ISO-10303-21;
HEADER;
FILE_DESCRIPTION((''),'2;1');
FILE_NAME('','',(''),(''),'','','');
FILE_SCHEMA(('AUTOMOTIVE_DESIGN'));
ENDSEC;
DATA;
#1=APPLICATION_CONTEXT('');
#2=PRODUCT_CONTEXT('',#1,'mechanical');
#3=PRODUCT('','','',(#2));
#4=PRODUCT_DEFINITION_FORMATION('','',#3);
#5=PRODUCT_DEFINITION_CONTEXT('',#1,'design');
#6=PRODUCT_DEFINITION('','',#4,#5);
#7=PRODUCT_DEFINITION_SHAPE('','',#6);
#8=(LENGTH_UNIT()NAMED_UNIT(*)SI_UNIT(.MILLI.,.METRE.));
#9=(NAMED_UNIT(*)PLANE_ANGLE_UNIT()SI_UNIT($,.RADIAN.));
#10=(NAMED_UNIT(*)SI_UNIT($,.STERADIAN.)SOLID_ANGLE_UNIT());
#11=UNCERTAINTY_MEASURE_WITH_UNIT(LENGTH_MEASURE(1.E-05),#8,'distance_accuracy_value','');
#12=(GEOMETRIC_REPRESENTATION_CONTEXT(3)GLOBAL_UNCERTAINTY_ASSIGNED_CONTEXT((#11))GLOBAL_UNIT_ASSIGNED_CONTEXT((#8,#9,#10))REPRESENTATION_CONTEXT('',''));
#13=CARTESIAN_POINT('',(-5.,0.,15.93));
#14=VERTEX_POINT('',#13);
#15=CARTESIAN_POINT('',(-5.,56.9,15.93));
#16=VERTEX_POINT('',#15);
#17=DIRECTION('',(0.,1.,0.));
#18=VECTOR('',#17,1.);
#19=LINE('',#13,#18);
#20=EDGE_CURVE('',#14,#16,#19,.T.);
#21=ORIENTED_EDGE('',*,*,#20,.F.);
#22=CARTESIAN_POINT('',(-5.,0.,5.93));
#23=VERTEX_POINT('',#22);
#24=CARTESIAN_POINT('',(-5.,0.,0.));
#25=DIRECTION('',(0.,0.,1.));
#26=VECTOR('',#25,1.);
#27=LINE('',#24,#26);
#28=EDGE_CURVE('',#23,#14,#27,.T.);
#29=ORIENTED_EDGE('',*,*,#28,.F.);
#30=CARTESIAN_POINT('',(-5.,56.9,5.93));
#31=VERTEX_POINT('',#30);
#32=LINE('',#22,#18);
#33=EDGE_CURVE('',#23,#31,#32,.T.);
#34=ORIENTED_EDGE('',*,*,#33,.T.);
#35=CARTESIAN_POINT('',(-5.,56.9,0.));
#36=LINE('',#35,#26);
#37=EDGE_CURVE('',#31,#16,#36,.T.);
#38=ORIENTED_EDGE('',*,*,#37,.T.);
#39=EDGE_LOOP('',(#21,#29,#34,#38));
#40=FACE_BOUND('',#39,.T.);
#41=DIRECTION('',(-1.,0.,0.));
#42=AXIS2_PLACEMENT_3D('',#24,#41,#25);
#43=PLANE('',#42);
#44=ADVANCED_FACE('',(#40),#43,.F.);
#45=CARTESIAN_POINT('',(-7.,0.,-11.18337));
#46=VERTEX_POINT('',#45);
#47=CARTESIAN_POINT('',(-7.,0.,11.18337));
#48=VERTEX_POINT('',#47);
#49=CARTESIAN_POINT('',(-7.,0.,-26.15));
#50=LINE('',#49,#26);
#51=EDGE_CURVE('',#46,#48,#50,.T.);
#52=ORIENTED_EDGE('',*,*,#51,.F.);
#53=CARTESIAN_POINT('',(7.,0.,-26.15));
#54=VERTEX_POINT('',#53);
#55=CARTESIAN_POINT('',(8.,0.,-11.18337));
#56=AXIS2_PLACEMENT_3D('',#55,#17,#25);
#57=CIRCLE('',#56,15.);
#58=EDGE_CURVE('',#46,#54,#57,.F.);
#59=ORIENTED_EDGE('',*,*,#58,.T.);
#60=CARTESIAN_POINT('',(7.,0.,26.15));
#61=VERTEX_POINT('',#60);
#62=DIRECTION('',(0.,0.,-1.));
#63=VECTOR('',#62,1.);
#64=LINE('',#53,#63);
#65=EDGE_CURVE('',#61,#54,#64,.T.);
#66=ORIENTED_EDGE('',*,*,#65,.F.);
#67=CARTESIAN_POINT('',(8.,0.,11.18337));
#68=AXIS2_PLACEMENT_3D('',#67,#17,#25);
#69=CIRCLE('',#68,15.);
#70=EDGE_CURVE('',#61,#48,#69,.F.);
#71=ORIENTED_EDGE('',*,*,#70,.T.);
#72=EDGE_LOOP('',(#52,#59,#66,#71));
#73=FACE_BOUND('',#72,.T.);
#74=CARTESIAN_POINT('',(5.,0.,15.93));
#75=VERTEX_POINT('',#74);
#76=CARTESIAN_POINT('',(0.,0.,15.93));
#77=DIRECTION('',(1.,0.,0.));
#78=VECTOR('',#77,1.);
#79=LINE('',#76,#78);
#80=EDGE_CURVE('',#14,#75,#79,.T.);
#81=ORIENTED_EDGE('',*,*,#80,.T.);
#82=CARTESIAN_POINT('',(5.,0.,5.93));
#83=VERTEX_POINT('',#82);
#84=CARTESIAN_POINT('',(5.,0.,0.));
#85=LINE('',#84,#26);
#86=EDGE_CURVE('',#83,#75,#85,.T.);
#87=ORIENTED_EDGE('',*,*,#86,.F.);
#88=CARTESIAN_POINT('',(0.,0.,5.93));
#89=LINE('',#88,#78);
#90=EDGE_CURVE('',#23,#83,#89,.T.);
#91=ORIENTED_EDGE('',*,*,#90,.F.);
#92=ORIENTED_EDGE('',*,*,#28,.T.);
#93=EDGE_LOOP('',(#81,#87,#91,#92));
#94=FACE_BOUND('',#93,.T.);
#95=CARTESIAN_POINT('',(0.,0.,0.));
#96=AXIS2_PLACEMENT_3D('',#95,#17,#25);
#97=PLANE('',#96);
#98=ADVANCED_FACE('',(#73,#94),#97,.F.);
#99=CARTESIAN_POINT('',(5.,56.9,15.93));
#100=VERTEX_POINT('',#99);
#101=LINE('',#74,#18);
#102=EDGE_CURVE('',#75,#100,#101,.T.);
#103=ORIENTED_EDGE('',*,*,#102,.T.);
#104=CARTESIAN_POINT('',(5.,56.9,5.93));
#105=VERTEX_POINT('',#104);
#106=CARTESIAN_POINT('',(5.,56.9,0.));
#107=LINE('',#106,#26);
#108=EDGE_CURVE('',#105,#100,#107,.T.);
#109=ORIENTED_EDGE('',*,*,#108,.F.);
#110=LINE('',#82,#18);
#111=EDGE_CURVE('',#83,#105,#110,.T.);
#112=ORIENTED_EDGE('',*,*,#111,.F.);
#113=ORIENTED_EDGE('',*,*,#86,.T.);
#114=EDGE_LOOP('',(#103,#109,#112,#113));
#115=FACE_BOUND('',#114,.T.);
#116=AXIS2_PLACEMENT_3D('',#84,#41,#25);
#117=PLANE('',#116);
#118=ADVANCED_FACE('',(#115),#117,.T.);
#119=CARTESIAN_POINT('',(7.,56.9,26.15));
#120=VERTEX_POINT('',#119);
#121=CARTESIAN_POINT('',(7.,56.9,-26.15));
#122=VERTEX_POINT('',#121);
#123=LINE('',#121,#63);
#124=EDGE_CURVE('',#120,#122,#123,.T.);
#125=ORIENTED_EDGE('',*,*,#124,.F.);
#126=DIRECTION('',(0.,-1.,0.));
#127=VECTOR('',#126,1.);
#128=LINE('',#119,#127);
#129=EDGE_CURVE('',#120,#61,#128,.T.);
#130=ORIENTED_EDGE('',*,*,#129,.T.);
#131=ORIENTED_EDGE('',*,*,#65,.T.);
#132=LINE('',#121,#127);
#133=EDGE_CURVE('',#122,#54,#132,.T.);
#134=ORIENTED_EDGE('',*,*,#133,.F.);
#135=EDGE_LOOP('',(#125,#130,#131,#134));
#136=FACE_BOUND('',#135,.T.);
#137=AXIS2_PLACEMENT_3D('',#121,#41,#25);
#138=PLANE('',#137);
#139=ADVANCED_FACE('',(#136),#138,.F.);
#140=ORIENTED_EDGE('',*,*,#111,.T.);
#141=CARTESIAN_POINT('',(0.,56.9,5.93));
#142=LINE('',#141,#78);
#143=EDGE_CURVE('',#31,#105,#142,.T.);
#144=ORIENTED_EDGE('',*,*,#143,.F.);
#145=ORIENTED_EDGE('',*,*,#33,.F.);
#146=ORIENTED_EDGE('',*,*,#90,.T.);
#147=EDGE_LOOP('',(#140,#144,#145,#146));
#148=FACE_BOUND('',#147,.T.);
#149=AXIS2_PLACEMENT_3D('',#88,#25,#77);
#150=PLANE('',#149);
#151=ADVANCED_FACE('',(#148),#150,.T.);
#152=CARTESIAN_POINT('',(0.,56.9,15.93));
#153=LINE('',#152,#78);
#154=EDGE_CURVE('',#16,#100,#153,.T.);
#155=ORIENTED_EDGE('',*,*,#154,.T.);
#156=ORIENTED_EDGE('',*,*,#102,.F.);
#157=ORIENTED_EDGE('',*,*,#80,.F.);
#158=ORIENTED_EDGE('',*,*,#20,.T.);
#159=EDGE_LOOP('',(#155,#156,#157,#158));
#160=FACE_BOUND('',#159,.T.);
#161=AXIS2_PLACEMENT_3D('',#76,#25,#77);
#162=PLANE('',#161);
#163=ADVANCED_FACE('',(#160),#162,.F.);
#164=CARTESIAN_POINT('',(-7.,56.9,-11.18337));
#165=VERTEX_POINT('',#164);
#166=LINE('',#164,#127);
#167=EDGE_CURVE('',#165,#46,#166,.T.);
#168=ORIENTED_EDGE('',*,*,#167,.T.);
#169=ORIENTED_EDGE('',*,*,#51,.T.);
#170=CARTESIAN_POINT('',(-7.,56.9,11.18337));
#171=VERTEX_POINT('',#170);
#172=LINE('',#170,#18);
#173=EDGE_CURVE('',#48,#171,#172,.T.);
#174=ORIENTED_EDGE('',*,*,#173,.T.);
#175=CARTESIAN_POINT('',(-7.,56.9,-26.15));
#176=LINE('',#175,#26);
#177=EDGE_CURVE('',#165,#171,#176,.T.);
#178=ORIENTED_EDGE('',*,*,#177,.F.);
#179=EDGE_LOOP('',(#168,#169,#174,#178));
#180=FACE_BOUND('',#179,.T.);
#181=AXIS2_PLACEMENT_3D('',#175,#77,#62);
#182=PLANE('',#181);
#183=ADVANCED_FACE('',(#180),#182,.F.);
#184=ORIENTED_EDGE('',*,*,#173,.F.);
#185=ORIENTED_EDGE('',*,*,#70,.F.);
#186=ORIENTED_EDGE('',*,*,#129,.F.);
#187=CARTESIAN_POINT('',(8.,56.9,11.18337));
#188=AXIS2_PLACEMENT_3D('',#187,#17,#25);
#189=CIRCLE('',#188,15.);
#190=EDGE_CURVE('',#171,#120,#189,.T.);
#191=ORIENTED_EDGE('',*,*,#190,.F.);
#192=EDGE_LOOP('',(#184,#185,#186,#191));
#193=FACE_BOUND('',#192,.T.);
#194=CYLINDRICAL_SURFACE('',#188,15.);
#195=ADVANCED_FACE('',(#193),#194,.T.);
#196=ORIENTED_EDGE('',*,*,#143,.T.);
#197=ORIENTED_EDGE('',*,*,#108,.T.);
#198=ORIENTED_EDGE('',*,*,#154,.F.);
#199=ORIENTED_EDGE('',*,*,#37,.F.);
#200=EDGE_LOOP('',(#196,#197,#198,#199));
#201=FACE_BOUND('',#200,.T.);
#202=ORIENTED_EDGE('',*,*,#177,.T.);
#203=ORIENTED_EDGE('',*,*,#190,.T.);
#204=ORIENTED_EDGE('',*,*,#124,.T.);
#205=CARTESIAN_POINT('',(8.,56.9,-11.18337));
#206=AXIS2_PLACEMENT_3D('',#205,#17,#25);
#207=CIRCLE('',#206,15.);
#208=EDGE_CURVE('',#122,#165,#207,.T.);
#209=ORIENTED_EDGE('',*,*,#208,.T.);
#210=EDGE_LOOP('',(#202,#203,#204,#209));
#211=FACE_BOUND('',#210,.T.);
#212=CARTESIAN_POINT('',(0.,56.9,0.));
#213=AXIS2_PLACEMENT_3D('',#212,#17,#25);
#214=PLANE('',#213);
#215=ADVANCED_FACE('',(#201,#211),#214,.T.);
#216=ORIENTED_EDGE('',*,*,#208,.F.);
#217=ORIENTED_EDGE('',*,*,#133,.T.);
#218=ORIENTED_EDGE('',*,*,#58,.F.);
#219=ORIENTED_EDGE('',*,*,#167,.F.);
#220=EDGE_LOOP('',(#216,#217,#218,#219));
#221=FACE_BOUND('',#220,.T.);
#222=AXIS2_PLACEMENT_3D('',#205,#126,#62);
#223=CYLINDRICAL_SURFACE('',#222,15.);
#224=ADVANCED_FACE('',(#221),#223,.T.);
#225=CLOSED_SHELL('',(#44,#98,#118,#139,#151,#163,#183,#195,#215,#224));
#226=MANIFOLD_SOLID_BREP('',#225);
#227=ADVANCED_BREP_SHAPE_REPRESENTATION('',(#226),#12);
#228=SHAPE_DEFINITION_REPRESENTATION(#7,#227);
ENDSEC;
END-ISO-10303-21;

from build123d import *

# Parameters (mm, degrees)
SKETCH_2_W          = 14
SKETCH_2_H          = 52.3
EXTRUDE_1_DEPTH     = 56.9
SKETCH_3_W          = 5
SKETCH_3_H          = 5
CUT_EXTRUDE_1_DEPTH = 56.9
FILLET_6_R          = 15


with BuildPart() as part:
    # Эскиз2 → Бобышка-Вытянуть1 (new body)
    with BuildSketch(Plane(origin=(0, 0, 0), x_dir=(1, 0, 0), z_dir=(0, 1, 0))):
        Rectangle(SKETCH_2_W, SKETCH_2_H)
    extrude(amount=EXTRUDE_1_DEPTH)

    # Эскиз3 → Вырез-Вытянуть1 (cut)
    with BuildSketch(Plane(origin=(0, 56.9, 0), x_dir=(1, 0, 0), z_dir=(0, 1, 0))):
        with Locations((-2.5, -13.43)):
            Rectangle(SKETCH_3_W, SKETCH_3_H)
        with Locations((-2.5, -8.43)):
            Rectangle(SKETCH_3_W, SKETCH_3_H)
        with Locations((2.5, -8.43)):
            Rectangle(SKETCH_3_W, SKETCH_3_H)
        with Locations((2.5, -13.43)):
            Rectangle(SKETCH_3_W, SKETCH_3_H)
    extrude(amount=-CUT_EXTRUDE_1_DEPTH, mode=Mode.SUBTRACT)

    # Скругление6
    # the kernel refuses this fillet: 15 mm, written as the material it takes off along each edge
    with BuildSketch(Plane(origin=(-7, -37.416573868, -26.15), x_dir=(1, 0, 0), z_dir=(0, 1, 0))) as fillet_6_piece_1:
        with BuildLine():
            CenterArc((15, -14.966629547), FILLET_6_R, 93.822553729, 86.177446271)
            Line((0, -14.966629547), (-0.3, -14.966629547))
            Line((-0.3, -14.966629547), (-0.3, 0))
            Line((-0.3, 0), (0, 0.3))
            ThreePointArc((0, 0.3), (7, 0.3), (13.98, 0.299332591))
            Line((13.98, 0.299332591), (14, 0))
        make_face()
    extrude(amount=131.733147735, mode=Mode.SUBTRACT)
    with BuildSketch(Plane(origin=(-7, -37.416573868, 26.15), x_dir=(0, 0, -1), z_dir=(0, 1, 0))) as fillet_6_piece_2:
        with BuildLine():
            CenterArc((14.966629547, -15), FILLET_6_R, 90, 86.177446271)
            Line((0, -14), (-0.299332591, -13.98))
            ThreePointArc((-0.299332591, -13.98), (-0.3, -7), (-0.3, 0))
            Line((-0.3, 0), (0, 0.3))
            Line((0, 0.3), (14.966629547, 0.3))
            Line((14.966629547, 0.3), (14.966629547, 0))
        make_face()
    extrude(amount=131.733147735, mode=Mode.SUBTRACT)


solid = part.part
